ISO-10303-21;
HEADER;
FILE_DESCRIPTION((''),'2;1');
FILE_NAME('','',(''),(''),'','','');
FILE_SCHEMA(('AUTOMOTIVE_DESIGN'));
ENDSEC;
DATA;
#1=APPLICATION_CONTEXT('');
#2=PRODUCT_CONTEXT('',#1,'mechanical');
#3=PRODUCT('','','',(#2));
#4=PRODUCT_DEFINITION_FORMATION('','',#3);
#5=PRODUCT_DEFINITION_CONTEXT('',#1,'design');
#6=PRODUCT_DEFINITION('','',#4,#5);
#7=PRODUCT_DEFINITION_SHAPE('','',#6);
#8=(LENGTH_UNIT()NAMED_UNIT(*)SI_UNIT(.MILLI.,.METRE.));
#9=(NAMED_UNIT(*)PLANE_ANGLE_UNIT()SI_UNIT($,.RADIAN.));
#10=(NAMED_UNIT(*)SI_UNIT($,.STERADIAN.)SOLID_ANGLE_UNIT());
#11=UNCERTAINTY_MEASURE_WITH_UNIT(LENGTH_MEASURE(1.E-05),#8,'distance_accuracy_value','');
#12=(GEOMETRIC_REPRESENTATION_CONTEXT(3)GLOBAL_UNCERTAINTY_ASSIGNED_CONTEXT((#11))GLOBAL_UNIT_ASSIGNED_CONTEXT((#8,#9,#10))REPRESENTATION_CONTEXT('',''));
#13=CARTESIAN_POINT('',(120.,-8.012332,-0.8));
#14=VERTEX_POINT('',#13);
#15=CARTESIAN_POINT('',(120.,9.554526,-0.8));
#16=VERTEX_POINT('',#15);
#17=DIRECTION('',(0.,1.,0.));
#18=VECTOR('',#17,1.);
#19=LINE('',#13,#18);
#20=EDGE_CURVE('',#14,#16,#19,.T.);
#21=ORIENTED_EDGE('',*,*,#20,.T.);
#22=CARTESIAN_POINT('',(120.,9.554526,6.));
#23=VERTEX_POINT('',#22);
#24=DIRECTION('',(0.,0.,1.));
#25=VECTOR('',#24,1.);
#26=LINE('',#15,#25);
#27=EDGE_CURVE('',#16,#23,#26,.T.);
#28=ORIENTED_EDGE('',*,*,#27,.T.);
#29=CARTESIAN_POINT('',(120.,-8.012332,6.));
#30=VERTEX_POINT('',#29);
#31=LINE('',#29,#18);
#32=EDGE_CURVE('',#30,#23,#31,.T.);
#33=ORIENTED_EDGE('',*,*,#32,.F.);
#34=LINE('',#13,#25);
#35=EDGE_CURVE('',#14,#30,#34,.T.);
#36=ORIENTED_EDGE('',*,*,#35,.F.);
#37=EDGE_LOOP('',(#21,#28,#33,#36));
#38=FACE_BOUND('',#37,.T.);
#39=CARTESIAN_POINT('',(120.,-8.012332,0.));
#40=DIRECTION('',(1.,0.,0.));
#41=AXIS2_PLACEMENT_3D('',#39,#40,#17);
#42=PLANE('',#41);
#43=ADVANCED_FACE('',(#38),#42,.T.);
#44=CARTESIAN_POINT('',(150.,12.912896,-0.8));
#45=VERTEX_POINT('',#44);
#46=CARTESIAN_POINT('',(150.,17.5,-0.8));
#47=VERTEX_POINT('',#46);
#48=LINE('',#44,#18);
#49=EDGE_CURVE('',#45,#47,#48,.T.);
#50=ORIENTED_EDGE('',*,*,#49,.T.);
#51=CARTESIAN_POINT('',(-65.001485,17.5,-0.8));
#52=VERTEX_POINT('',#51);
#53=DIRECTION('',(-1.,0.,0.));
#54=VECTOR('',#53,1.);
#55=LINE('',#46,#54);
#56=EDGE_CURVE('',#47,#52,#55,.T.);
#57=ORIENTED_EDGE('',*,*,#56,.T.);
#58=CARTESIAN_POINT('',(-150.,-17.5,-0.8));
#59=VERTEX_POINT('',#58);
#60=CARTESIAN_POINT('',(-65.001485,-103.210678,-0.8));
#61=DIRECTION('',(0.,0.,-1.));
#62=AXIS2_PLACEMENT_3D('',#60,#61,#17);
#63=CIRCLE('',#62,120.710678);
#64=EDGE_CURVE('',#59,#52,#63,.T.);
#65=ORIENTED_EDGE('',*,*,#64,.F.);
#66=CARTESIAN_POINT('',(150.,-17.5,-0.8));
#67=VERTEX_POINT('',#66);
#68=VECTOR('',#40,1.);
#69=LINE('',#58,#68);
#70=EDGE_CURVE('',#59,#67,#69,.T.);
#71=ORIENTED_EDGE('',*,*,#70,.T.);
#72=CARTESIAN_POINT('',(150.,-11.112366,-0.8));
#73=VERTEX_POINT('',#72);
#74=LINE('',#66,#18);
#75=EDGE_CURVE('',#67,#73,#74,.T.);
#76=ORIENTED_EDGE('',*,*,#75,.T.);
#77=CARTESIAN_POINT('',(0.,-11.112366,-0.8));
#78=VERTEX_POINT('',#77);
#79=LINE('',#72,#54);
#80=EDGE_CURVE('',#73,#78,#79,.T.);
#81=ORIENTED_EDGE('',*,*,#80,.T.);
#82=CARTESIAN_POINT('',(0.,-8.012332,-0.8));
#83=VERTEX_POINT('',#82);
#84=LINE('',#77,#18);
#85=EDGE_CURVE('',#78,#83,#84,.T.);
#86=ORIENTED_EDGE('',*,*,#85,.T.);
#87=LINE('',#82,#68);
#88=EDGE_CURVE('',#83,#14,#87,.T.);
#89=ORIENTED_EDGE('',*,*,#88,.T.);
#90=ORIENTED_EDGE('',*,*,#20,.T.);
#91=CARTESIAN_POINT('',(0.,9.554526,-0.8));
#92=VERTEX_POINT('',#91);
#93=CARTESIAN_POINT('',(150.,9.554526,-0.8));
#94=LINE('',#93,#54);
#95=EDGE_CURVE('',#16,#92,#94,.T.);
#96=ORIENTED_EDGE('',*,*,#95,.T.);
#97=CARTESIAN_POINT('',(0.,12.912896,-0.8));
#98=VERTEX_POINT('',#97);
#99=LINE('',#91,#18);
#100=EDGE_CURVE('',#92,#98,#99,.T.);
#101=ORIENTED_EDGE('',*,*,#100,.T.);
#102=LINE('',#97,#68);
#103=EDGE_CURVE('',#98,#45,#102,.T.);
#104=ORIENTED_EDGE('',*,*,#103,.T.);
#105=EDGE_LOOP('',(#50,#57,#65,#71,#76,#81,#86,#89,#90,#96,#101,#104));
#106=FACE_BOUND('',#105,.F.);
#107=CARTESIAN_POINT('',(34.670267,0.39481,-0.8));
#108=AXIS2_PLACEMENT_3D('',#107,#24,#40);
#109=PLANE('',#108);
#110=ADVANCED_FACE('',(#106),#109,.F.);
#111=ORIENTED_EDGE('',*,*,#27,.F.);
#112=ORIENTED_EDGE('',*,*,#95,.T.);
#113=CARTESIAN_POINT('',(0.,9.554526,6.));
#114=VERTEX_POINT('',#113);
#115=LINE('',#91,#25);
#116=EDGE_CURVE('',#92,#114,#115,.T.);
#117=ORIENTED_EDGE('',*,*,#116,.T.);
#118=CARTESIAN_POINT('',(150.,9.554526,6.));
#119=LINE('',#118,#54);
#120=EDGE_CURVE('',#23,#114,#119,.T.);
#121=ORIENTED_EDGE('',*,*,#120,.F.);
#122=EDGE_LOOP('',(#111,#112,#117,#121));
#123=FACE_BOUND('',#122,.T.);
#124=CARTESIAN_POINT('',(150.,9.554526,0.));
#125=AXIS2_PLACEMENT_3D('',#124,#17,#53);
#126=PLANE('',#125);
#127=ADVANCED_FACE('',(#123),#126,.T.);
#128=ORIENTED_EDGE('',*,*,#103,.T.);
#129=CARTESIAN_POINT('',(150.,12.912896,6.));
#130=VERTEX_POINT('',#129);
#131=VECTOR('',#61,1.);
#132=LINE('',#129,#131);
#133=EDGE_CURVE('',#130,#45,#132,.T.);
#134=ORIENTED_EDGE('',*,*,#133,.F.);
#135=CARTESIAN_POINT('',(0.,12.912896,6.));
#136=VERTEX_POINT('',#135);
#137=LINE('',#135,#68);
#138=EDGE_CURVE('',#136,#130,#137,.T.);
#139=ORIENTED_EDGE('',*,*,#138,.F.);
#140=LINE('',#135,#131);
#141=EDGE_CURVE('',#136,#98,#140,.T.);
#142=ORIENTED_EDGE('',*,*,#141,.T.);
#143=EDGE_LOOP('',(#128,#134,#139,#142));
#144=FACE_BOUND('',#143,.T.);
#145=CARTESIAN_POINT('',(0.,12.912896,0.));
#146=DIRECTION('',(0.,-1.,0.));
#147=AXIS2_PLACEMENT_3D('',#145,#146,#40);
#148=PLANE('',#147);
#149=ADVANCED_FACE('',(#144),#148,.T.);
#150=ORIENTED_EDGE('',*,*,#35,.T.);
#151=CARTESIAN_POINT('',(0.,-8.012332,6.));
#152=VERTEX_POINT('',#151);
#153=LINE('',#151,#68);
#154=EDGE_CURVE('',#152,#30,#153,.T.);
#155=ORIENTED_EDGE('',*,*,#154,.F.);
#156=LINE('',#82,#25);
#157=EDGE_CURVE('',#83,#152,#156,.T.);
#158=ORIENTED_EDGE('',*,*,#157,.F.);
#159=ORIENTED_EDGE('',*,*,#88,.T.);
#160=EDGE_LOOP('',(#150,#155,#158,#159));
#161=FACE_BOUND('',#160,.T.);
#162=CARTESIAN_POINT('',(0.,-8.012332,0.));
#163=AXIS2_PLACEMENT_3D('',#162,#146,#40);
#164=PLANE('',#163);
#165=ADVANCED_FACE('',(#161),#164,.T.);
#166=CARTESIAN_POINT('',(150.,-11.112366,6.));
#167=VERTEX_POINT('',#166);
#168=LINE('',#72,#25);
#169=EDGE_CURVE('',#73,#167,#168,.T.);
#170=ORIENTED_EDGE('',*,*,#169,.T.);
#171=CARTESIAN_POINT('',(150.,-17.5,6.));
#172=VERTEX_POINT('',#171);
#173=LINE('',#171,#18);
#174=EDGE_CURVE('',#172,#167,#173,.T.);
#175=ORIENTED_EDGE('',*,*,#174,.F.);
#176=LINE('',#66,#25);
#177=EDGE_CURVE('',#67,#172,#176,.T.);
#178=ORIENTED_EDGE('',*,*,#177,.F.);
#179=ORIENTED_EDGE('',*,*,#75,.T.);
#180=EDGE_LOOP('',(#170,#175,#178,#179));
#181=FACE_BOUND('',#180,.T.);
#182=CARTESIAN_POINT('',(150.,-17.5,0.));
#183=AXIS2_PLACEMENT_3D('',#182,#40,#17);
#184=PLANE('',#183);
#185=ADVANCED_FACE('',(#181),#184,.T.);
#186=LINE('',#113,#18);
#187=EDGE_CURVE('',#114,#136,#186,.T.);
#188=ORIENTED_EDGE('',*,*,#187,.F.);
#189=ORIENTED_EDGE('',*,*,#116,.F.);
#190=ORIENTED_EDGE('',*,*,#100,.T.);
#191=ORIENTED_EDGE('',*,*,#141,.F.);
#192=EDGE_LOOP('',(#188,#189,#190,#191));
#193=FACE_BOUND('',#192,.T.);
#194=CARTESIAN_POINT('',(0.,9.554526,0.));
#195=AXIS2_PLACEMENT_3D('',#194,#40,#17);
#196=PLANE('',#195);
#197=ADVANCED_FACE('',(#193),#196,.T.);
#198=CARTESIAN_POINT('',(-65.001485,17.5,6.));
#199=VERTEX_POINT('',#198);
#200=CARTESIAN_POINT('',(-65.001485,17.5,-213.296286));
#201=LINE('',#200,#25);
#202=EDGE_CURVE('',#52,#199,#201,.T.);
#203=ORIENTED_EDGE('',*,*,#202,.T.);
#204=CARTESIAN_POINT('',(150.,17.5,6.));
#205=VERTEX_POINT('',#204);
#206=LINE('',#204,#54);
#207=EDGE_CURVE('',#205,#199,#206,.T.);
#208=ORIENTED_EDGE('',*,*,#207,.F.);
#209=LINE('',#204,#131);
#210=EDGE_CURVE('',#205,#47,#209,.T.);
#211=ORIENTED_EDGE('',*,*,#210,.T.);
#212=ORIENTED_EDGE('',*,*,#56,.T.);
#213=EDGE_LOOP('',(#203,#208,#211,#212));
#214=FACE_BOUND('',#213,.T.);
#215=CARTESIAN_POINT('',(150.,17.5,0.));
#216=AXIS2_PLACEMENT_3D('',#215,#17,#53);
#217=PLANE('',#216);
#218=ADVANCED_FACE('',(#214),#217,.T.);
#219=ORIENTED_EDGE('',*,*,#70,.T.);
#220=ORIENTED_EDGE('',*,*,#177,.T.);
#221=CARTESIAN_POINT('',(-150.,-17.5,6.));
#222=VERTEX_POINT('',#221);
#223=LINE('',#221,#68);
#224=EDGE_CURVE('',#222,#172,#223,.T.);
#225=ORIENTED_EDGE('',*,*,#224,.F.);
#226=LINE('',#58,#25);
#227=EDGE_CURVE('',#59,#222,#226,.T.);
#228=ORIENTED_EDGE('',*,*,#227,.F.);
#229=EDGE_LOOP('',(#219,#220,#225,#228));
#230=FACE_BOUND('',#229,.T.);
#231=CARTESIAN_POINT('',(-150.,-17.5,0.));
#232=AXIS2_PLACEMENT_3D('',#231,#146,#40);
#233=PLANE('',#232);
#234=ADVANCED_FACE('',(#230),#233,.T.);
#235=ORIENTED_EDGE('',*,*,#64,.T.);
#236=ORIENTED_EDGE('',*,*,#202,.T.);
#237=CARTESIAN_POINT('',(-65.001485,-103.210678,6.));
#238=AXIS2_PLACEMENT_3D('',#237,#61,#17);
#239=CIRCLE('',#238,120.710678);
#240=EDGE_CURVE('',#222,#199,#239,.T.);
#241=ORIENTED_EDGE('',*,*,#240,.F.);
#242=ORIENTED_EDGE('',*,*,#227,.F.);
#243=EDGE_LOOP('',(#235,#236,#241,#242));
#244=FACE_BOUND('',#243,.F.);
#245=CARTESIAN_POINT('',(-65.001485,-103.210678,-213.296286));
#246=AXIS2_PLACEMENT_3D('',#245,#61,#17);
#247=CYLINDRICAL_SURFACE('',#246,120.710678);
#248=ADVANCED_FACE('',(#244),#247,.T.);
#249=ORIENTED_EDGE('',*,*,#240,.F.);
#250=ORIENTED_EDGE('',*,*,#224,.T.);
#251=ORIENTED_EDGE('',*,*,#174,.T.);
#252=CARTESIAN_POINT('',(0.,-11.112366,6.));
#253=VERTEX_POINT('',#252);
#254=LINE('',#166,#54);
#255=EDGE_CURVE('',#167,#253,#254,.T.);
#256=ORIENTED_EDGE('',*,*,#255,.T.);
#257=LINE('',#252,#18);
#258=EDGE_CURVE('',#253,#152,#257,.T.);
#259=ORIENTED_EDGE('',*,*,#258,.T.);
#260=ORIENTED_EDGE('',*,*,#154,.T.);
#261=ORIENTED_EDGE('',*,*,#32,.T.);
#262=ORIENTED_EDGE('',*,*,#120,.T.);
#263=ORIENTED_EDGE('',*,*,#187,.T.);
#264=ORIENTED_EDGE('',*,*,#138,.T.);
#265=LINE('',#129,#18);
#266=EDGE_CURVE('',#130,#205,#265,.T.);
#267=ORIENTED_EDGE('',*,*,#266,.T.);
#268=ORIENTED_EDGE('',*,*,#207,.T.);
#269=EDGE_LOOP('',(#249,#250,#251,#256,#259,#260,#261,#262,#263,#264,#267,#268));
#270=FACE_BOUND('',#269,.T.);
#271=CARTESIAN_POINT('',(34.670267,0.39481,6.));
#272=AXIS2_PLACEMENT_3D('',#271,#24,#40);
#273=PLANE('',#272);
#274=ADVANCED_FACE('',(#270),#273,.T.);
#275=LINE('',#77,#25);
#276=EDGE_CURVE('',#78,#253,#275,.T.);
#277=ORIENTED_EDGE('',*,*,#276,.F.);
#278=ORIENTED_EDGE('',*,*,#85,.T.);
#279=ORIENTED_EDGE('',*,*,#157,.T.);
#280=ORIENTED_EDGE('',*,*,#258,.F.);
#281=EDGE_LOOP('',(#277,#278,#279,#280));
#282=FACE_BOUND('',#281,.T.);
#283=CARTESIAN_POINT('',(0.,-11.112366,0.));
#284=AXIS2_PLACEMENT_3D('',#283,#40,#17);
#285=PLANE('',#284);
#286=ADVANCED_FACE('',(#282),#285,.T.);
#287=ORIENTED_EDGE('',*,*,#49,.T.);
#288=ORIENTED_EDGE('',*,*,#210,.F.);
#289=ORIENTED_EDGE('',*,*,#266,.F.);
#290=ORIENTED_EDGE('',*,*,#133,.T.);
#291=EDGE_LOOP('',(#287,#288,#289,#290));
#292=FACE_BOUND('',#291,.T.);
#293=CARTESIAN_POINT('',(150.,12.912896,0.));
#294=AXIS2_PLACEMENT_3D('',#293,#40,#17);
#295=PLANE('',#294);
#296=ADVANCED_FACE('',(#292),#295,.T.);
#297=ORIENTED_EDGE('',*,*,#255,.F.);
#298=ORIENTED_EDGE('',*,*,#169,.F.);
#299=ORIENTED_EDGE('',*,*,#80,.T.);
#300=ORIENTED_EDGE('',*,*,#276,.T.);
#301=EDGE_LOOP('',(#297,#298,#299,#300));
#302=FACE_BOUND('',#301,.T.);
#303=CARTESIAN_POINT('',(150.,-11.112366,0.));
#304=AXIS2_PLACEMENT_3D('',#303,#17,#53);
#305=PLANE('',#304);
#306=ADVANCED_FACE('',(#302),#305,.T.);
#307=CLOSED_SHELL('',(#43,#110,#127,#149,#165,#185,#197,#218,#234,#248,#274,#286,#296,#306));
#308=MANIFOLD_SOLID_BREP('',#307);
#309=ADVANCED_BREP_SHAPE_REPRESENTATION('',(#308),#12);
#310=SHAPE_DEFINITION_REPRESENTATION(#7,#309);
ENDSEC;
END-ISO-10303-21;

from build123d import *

# Parameters (mm, degrees)
F1_DEPTH    = 6
F2_DEPTH    = 0.8
F3_T1_DEPTH = 431.7925725323
F4_DEPTH    = 30


# Not quite as in the source:
# - a fillet or chamfer that OpenCascade refuses, or shapes differently, is made with other operations: its cross-section is extruded or revolved along the edge and cut away or added


with BuildPart() as f1:
    # F0 (on Top) → F1 (new body)
    with BuildSketch(Plane.XY):
        Polygon((150, 17.5), (-150, 17.5), (-150, -17.5), (150, -17.5), (150, -11.1123658717), (0, -11.1123658717), (0, -8.0123320222), (150, -8.0123320222), (150, 9.5545258373), (0, 9.5545258373), (0, 12.9128964618), (150, 12.9128964618), align=None)
    extrude(amount=F1_DEPTH)

    # F2 (add): faces of the model
    f2_faces = [f1.faces().sort_by_distance(p)[0] for p in [
        (-7.6230433236, -0.1272136786, 0),
        (-7.6230433236, -0.1272136786, 6),
    ]]
    extrude(f2_faces, amount=F2_DEPTH, dir=(0, 0, -1))

    # F3: fillet of radius 120.7106781187 on 1 edges, made by hand

    # F3_s2 → F3_t1 (cut)
    with BuildSketch(Plane.XY.offset(-213.2962862662)):
        with BuildLine():
            ThreePointArc((-65.0014854935, 17.5), (-110.9627394699, 8.4075593911), (-150, -17.5))
            Line((-150, -17.5), (-150, 17.5))
            Line((-150, 17.5), (-65.0014854935, 17.5))
        make_face()
    extrude(amount=F3_T1_DEPTH, mode=Mode.SUBTRACT)

    # F4 (cut): a face of the model
    f4_faces = [f1.faces().sort_by_distance(p)[0] for p in [
        (150, 0.7710969076, 2.6),
    ]]
    extrude(f4_faces, amount=-F4_DEPTH, mode=Mode.SUBTRACT)


solid = f1.part
